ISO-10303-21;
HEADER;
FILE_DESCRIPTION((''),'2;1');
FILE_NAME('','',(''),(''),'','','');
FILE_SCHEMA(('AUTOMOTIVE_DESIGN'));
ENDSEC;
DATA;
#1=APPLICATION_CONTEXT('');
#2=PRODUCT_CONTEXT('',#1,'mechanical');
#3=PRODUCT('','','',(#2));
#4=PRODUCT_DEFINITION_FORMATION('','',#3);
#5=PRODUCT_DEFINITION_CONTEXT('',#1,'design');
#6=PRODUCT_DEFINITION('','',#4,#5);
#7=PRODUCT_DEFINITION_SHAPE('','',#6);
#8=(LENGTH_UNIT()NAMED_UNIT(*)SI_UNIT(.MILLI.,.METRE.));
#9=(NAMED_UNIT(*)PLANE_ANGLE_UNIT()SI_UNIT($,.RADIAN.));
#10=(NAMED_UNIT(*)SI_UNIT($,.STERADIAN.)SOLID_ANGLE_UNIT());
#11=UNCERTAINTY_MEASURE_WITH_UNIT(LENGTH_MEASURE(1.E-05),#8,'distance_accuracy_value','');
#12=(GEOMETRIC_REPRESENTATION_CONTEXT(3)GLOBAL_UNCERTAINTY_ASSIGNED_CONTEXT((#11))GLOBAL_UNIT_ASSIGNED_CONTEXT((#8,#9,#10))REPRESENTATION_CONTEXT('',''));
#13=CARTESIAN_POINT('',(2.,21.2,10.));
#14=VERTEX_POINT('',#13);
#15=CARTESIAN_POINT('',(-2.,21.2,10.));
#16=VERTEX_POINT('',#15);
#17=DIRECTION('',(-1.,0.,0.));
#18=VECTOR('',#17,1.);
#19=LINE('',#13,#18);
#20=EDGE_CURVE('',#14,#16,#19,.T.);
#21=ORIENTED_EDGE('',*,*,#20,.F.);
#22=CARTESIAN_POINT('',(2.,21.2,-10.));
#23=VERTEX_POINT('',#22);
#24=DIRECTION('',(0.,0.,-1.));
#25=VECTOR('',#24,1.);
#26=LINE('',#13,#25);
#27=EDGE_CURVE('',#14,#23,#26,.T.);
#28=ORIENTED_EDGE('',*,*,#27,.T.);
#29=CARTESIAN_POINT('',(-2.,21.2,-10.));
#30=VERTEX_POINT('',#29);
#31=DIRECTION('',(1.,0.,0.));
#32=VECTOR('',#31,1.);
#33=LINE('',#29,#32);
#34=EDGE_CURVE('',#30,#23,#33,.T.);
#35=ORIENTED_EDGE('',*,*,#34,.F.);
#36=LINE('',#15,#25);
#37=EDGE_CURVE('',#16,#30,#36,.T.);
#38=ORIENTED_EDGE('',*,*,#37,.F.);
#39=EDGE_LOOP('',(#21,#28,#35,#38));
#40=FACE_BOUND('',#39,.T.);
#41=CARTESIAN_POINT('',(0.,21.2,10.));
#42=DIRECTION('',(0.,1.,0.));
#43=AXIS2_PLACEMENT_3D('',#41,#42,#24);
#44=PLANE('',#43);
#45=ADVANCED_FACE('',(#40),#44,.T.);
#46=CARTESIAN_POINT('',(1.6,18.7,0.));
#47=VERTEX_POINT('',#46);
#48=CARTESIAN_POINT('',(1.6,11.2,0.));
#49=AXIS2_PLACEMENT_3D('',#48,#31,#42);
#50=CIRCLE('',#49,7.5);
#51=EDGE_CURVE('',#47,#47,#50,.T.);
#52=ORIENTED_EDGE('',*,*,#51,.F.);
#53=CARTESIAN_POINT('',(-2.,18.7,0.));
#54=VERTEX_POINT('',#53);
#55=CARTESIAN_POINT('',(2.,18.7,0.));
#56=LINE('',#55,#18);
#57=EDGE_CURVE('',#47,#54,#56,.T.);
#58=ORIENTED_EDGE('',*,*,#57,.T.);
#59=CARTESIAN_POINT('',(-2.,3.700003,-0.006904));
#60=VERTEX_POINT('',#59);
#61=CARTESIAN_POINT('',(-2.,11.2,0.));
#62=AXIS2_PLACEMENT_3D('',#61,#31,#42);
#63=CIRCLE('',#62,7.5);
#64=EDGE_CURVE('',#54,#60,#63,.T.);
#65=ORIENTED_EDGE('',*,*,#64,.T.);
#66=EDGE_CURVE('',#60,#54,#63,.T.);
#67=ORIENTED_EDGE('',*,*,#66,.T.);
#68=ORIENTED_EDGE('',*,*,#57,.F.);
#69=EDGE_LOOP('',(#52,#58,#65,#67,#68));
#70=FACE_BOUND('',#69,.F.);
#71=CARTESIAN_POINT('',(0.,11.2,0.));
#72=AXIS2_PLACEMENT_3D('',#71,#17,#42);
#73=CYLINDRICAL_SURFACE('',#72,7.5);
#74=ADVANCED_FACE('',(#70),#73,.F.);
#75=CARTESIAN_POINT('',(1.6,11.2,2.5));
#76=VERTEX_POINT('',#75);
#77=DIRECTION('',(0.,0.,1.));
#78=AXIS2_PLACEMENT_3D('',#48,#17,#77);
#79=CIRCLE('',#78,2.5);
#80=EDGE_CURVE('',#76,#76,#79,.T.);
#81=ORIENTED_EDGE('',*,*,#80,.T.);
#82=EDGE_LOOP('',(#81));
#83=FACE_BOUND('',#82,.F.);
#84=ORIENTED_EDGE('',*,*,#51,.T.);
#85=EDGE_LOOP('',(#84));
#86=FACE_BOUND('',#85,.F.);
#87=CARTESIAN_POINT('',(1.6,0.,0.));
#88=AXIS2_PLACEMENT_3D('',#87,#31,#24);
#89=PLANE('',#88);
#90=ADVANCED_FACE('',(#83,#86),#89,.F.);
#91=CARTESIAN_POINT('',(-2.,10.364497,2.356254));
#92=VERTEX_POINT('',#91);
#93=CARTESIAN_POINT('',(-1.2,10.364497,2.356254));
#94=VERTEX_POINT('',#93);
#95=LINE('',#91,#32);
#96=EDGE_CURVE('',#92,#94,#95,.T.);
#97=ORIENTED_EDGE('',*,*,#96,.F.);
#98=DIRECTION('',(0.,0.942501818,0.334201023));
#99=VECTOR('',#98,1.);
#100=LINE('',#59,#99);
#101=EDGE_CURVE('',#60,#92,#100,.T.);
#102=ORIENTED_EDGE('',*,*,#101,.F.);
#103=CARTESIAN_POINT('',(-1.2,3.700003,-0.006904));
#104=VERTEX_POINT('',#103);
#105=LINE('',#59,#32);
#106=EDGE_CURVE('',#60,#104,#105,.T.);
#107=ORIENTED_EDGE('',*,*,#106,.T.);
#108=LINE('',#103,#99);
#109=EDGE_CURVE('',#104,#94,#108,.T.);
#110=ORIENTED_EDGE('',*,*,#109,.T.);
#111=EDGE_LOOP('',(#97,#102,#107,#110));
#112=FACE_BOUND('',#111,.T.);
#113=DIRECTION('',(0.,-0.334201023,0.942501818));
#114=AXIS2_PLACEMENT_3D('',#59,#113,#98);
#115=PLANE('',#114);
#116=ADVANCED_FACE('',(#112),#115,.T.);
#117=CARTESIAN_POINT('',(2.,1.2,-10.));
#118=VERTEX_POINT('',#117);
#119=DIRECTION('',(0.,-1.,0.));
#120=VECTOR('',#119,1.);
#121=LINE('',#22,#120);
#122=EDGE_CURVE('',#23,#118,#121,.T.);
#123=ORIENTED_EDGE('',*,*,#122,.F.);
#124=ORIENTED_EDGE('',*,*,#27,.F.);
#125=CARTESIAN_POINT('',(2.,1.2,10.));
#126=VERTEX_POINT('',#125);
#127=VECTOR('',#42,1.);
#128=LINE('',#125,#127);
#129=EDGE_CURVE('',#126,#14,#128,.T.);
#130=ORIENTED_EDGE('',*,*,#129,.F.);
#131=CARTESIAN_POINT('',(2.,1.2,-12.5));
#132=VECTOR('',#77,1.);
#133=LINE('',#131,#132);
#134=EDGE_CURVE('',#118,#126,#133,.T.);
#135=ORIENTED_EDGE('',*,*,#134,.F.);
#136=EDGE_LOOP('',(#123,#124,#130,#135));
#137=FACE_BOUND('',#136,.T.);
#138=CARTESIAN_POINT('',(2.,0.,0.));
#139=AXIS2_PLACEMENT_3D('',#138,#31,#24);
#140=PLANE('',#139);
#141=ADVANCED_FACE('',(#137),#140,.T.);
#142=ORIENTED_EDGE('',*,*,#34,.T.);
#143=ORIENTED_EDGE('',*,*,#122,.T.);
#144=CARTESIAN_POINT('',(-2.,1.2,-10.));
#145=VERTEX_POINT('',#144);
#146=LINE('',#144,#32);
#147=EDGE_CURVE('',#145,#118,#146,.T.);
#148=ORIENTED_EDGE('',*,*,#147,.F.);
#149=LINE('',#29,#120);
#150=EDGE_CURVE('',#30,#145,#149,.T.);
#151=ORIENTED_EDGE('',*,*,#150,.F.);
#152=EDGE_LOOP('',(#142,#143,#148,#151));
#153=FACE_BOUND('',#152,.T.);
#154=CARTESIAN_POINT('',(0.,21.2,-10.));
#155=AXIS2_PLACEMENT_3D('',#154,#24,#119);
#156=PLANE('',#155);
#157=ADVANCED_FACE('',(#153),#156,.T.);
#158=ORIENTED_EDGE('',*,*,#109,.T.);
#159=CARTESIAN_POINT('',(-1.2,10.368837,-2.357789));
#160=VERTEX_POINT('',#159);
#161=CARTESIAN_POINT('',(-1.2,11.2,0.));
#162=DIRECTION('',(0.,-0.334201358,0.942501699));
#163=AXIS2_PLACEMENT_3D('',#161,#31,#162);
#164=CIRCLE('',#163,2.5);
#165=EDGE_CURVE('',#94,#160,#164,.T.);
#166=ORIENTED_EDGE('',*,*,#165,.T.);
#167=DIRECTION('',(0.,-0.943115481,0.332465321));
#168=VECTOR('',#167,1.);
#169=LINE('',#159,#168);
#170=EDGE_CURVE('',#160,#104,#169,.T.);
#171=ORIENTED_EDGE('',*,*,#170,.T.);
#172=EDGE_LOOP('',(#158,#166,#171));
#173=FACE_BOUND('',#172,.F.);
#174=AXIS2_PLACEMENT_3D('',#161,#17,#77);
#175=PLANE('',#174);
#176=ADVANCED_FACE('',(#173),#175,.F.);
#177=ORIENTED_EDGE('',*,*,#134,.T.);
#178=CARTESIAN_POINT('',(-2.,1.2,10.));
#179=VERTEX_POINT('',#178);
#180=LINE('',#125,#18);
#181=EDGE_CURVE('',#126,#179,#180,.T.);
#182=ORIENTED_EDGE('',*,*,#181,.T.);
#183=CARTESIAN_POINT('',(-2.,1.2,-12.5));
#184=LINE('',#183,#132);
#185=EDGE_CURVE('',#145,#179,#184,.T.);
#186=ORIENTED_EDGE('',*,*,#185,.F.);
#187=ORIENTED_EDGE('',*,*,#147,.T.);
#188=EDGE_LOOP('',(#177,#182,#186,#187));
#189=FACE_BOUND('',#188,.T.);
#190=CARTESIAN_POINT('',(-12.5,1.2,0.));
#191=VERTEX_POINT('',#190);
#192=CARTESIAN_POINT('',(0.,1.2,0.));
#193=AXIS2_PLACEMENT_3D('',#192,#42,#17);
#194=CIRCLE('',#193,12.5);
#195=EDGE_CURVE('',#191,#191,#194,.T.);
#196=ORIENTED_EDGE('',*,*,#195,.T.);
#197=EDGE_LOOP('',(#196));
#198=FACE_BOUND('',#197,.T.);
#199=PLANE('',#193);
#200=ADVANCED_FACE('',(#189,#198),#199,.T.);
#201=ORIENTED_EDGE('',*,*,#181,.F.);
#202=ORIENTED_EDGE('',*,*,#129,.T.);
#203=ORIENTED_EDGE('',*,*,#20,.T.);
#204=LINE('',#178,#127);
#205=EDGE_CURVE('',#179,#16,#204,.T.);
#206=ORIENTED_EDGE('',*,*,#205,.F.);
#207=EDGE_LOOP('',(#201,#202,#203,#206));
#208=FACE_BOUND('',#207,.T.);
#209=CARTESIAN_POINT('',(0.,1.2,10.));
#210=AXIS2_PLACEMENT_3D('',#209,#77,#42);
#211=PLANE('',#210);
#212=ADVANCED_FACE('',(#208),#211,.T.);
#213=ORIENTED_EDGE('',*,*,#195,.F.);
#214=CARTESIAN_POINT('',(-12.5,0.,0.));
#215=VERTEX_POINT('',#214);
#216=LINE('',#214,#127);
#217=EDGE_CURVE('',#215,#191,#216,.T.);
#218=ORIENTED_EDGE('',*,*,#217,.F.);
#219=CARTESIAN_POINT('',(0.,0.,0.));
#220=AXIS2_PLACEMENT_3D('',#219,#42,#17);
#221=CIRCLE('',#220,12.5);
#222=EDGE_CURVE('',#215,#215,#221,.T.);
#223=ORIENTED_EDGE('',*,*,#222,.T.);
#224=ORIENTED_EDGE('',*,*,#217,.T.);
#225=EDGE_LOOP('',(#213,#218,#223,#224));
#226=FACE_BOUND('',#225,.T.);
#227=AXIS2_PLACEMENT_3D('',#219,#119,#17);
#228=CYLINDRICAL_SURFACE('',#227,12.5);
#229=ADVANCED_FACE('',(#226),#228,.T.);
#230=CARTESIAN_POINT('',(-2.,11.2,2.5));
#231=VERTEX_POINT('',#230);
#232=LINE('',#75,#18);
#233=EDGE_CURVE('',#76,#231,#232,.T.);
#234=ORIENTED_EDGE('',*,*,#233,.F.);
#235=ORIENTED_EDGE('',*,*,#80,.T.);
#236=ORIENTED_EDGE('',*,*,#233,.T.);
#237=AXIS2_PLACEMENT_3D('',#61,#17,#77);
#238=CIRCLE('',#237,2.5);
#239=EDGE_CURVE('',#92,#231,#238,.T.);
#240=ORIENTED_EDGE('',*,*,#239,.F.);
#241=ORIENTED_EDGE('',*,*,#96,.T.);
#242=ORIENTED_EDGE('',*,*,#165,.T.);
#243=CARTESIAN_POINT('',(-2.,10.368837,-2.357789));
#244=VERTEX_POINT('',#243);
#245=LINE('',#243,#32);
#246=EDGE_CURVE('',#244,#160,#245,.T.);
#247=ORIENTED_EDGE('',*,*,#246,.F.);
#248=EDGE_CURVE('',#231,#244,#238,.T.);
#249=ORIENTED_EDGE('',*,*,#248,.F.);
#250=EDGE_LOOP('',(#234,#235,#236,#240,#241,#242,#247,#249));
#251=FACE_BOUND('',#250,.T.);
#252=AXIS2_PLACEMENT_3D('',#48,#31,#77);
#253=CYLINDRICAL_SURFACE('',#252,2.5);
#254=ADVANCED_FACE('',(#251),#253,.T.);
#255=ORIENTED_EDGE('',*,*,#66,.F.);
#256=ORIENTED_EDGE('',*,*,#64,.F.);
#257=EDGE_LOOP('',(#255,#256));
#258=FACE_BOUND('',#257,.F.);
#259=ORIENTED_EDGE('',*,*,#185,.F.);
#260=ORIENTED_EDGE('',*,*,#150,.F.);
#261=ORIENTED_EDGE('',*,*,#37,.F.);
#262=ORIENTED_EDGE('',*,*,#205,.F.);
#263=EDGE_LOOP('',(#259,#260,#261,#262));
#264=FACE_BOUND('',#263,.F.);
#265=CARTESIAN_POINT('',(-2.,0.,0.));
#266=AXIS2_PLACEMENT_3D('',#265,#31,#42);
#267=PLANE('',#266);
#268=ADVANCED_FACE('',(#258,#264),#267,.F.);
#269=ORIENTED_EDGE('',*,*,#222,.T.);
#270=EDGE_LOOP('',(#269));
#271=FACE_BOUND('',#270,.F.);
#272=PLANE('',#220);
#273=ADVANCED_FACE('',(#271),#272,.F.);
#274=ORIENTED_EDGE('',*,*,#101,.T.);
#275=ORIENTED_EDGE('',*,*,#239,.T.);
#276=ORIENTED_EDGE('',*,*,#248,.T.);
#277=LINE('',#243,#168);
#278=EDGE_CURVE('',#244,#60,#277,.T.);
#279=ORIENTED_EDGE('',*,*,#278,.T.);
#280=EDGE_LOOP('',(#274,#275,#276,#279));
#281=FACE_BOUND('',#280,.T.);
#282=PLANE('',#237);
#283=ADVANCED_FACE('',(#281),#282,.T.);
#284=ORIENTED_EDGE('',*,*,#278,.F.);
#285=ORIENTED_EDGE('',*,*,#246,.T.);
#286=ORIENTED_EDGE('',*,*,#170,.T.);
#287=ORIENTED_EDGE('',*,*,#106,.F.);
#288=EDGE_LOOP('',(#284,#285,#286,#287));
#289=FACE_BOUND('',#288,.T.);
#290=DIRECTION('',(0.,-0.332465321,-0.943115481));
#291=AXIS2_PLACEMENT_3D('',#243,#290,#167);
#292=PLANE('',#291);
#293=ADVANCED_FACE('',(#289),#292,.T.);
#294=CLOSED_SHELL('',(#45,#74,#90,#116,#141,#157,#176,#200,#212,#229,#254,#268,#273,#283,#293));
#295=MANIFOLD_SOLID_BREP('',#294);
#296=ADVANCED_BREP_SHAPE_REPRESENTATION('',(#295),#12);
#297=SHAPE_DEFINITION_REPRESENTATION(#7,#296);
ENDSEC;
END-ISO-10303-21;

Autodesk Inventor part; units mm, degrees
ref_plane "XZ Plane" through (0, 0, 0) normal (0, 1, 0) x (-1, 0, 0)
ref_plane "XY Plane" through (0, 0, 0) normal (0, 0, 1) x (1, 0, 0)
sketch "Sketch1" plane through (0, 0, 0) normal (0, 1, 0) x (-1, 0, 0)
  circle A0 centre (0, 0) radius 12.5
  dimension "d0" = 25
extrude "Extrusion1" add sketch "Sketch1" along normal blind 1.2
sketch "Sketch3" plane through (0, 0, 0) normal (1, 0, 0) x (0, 1, 0)
  line L0 (1.2, -12.5) -> (1.2, 12.5) projected
  line L1 (0, -12.5) -> (0, 12.5) projected
  line L2 (1.2, 10) -> (21.2, 10)
  line L3 (21.2, 10) -> (21.2, -10)
  line L4 (21.2, -10) -> (1.2, -10)
  line L5 (1.2, -10) -> (1.2, 10)
  circle A0 centre (11.2, 0) radius 7.5
  point P0 (0, 0)
  point P1 (1.2, -10)
  point P2 (1.2, -10)
  dimension "d3" = 20
  dimension "d4" = 20
  dimension "d5" = 2.5
  dimension "d6" = 15
extrude "Extrusion2" add sketch "Sketch3" along normal mid plane 4
sketch "Sketch4" plane through (2, 0, 0) normal (1, 0, 0) x (0, 0, -1)
  line L0 (-10, 21.2) -> (-10, 1.2) projected
  line L1 (10, 1.2) -> (-10, 1.2) projected
  line L2 (10, 1.2) -> (10, 21.2) projected
  line L3 (10, 21.2) -> (-10, 21.2) projected
  circle A0 centre (0, 11.2) radius 7.5 projected
  circle A1 centre (0, 11.2) radius 7.5
  point P0 (0, 0)
extrude "Extrusion3" add sketch "Sketch4" against normal blind 0.4 contours A0
sketch "Sketch5" plane through (1.6, 11.2, 0) normal (-1, 0, 0) x (0, 0, 1)
  line L0 (10, -10) -> (10, 10) projected
  line L1 (10, 10) -> (-10, 10) projected
  line L2 (-10, 10) -> (-10, -10) projected
  line L3 (10, -10) -> (-10, -10) projected
  circle A0 centre (0, 0) radius 7.5 projected
  circle A1 centre (0, 0) radius 2.5
  point P0 (0, -11.2)
  point P1 (0.000179, -7.5)
  dimension "d17" = 5
extrude "Extrusion4" add sketch "Sketch5" along normal up to surface (3.6 mm away) contours A1
sketch "Sketch7" plane through (-2, 11.2, 0) normal (-1, 0, 0) x (0, 0, 1)
  circle A0 centre (0, 0) radius 7.5
  line L0 (-0.006904, -7.499997) -> (2.356254, -0.835503)
  line L1 (-0.006904, -7.499997) -> (-2.357789, -0.831163)
  circle A1 centre (0, 0) radius 2.5
  circle A2 centre (0, 0) radius 2.5
  point P0 (0, -11.2)
  point P1 (2.356254, -0.835503)
  point P2 (-2.357789, -0.831163)
sketch "Sketch7 outline for Extrusion5" plane through (-2, 11.2, 0) normal (-1, 0, 0) x (0, 0, 1)
  arc A0 (2.356254, -0.835503) -> (-2.357789, -0.831163) centre (0, 0) cw
  line L0 (-0.006904, -7.499997) -> (2.356254, -0.835503)
  line L1 (-2.357789, -0.831163) -> (-0.006904, -7.499997)
extrude "Extrusion5" add sketch "Sketch7 outline for Extrusion5" against normal blind 0.8
properties part number "TestBushButton"
